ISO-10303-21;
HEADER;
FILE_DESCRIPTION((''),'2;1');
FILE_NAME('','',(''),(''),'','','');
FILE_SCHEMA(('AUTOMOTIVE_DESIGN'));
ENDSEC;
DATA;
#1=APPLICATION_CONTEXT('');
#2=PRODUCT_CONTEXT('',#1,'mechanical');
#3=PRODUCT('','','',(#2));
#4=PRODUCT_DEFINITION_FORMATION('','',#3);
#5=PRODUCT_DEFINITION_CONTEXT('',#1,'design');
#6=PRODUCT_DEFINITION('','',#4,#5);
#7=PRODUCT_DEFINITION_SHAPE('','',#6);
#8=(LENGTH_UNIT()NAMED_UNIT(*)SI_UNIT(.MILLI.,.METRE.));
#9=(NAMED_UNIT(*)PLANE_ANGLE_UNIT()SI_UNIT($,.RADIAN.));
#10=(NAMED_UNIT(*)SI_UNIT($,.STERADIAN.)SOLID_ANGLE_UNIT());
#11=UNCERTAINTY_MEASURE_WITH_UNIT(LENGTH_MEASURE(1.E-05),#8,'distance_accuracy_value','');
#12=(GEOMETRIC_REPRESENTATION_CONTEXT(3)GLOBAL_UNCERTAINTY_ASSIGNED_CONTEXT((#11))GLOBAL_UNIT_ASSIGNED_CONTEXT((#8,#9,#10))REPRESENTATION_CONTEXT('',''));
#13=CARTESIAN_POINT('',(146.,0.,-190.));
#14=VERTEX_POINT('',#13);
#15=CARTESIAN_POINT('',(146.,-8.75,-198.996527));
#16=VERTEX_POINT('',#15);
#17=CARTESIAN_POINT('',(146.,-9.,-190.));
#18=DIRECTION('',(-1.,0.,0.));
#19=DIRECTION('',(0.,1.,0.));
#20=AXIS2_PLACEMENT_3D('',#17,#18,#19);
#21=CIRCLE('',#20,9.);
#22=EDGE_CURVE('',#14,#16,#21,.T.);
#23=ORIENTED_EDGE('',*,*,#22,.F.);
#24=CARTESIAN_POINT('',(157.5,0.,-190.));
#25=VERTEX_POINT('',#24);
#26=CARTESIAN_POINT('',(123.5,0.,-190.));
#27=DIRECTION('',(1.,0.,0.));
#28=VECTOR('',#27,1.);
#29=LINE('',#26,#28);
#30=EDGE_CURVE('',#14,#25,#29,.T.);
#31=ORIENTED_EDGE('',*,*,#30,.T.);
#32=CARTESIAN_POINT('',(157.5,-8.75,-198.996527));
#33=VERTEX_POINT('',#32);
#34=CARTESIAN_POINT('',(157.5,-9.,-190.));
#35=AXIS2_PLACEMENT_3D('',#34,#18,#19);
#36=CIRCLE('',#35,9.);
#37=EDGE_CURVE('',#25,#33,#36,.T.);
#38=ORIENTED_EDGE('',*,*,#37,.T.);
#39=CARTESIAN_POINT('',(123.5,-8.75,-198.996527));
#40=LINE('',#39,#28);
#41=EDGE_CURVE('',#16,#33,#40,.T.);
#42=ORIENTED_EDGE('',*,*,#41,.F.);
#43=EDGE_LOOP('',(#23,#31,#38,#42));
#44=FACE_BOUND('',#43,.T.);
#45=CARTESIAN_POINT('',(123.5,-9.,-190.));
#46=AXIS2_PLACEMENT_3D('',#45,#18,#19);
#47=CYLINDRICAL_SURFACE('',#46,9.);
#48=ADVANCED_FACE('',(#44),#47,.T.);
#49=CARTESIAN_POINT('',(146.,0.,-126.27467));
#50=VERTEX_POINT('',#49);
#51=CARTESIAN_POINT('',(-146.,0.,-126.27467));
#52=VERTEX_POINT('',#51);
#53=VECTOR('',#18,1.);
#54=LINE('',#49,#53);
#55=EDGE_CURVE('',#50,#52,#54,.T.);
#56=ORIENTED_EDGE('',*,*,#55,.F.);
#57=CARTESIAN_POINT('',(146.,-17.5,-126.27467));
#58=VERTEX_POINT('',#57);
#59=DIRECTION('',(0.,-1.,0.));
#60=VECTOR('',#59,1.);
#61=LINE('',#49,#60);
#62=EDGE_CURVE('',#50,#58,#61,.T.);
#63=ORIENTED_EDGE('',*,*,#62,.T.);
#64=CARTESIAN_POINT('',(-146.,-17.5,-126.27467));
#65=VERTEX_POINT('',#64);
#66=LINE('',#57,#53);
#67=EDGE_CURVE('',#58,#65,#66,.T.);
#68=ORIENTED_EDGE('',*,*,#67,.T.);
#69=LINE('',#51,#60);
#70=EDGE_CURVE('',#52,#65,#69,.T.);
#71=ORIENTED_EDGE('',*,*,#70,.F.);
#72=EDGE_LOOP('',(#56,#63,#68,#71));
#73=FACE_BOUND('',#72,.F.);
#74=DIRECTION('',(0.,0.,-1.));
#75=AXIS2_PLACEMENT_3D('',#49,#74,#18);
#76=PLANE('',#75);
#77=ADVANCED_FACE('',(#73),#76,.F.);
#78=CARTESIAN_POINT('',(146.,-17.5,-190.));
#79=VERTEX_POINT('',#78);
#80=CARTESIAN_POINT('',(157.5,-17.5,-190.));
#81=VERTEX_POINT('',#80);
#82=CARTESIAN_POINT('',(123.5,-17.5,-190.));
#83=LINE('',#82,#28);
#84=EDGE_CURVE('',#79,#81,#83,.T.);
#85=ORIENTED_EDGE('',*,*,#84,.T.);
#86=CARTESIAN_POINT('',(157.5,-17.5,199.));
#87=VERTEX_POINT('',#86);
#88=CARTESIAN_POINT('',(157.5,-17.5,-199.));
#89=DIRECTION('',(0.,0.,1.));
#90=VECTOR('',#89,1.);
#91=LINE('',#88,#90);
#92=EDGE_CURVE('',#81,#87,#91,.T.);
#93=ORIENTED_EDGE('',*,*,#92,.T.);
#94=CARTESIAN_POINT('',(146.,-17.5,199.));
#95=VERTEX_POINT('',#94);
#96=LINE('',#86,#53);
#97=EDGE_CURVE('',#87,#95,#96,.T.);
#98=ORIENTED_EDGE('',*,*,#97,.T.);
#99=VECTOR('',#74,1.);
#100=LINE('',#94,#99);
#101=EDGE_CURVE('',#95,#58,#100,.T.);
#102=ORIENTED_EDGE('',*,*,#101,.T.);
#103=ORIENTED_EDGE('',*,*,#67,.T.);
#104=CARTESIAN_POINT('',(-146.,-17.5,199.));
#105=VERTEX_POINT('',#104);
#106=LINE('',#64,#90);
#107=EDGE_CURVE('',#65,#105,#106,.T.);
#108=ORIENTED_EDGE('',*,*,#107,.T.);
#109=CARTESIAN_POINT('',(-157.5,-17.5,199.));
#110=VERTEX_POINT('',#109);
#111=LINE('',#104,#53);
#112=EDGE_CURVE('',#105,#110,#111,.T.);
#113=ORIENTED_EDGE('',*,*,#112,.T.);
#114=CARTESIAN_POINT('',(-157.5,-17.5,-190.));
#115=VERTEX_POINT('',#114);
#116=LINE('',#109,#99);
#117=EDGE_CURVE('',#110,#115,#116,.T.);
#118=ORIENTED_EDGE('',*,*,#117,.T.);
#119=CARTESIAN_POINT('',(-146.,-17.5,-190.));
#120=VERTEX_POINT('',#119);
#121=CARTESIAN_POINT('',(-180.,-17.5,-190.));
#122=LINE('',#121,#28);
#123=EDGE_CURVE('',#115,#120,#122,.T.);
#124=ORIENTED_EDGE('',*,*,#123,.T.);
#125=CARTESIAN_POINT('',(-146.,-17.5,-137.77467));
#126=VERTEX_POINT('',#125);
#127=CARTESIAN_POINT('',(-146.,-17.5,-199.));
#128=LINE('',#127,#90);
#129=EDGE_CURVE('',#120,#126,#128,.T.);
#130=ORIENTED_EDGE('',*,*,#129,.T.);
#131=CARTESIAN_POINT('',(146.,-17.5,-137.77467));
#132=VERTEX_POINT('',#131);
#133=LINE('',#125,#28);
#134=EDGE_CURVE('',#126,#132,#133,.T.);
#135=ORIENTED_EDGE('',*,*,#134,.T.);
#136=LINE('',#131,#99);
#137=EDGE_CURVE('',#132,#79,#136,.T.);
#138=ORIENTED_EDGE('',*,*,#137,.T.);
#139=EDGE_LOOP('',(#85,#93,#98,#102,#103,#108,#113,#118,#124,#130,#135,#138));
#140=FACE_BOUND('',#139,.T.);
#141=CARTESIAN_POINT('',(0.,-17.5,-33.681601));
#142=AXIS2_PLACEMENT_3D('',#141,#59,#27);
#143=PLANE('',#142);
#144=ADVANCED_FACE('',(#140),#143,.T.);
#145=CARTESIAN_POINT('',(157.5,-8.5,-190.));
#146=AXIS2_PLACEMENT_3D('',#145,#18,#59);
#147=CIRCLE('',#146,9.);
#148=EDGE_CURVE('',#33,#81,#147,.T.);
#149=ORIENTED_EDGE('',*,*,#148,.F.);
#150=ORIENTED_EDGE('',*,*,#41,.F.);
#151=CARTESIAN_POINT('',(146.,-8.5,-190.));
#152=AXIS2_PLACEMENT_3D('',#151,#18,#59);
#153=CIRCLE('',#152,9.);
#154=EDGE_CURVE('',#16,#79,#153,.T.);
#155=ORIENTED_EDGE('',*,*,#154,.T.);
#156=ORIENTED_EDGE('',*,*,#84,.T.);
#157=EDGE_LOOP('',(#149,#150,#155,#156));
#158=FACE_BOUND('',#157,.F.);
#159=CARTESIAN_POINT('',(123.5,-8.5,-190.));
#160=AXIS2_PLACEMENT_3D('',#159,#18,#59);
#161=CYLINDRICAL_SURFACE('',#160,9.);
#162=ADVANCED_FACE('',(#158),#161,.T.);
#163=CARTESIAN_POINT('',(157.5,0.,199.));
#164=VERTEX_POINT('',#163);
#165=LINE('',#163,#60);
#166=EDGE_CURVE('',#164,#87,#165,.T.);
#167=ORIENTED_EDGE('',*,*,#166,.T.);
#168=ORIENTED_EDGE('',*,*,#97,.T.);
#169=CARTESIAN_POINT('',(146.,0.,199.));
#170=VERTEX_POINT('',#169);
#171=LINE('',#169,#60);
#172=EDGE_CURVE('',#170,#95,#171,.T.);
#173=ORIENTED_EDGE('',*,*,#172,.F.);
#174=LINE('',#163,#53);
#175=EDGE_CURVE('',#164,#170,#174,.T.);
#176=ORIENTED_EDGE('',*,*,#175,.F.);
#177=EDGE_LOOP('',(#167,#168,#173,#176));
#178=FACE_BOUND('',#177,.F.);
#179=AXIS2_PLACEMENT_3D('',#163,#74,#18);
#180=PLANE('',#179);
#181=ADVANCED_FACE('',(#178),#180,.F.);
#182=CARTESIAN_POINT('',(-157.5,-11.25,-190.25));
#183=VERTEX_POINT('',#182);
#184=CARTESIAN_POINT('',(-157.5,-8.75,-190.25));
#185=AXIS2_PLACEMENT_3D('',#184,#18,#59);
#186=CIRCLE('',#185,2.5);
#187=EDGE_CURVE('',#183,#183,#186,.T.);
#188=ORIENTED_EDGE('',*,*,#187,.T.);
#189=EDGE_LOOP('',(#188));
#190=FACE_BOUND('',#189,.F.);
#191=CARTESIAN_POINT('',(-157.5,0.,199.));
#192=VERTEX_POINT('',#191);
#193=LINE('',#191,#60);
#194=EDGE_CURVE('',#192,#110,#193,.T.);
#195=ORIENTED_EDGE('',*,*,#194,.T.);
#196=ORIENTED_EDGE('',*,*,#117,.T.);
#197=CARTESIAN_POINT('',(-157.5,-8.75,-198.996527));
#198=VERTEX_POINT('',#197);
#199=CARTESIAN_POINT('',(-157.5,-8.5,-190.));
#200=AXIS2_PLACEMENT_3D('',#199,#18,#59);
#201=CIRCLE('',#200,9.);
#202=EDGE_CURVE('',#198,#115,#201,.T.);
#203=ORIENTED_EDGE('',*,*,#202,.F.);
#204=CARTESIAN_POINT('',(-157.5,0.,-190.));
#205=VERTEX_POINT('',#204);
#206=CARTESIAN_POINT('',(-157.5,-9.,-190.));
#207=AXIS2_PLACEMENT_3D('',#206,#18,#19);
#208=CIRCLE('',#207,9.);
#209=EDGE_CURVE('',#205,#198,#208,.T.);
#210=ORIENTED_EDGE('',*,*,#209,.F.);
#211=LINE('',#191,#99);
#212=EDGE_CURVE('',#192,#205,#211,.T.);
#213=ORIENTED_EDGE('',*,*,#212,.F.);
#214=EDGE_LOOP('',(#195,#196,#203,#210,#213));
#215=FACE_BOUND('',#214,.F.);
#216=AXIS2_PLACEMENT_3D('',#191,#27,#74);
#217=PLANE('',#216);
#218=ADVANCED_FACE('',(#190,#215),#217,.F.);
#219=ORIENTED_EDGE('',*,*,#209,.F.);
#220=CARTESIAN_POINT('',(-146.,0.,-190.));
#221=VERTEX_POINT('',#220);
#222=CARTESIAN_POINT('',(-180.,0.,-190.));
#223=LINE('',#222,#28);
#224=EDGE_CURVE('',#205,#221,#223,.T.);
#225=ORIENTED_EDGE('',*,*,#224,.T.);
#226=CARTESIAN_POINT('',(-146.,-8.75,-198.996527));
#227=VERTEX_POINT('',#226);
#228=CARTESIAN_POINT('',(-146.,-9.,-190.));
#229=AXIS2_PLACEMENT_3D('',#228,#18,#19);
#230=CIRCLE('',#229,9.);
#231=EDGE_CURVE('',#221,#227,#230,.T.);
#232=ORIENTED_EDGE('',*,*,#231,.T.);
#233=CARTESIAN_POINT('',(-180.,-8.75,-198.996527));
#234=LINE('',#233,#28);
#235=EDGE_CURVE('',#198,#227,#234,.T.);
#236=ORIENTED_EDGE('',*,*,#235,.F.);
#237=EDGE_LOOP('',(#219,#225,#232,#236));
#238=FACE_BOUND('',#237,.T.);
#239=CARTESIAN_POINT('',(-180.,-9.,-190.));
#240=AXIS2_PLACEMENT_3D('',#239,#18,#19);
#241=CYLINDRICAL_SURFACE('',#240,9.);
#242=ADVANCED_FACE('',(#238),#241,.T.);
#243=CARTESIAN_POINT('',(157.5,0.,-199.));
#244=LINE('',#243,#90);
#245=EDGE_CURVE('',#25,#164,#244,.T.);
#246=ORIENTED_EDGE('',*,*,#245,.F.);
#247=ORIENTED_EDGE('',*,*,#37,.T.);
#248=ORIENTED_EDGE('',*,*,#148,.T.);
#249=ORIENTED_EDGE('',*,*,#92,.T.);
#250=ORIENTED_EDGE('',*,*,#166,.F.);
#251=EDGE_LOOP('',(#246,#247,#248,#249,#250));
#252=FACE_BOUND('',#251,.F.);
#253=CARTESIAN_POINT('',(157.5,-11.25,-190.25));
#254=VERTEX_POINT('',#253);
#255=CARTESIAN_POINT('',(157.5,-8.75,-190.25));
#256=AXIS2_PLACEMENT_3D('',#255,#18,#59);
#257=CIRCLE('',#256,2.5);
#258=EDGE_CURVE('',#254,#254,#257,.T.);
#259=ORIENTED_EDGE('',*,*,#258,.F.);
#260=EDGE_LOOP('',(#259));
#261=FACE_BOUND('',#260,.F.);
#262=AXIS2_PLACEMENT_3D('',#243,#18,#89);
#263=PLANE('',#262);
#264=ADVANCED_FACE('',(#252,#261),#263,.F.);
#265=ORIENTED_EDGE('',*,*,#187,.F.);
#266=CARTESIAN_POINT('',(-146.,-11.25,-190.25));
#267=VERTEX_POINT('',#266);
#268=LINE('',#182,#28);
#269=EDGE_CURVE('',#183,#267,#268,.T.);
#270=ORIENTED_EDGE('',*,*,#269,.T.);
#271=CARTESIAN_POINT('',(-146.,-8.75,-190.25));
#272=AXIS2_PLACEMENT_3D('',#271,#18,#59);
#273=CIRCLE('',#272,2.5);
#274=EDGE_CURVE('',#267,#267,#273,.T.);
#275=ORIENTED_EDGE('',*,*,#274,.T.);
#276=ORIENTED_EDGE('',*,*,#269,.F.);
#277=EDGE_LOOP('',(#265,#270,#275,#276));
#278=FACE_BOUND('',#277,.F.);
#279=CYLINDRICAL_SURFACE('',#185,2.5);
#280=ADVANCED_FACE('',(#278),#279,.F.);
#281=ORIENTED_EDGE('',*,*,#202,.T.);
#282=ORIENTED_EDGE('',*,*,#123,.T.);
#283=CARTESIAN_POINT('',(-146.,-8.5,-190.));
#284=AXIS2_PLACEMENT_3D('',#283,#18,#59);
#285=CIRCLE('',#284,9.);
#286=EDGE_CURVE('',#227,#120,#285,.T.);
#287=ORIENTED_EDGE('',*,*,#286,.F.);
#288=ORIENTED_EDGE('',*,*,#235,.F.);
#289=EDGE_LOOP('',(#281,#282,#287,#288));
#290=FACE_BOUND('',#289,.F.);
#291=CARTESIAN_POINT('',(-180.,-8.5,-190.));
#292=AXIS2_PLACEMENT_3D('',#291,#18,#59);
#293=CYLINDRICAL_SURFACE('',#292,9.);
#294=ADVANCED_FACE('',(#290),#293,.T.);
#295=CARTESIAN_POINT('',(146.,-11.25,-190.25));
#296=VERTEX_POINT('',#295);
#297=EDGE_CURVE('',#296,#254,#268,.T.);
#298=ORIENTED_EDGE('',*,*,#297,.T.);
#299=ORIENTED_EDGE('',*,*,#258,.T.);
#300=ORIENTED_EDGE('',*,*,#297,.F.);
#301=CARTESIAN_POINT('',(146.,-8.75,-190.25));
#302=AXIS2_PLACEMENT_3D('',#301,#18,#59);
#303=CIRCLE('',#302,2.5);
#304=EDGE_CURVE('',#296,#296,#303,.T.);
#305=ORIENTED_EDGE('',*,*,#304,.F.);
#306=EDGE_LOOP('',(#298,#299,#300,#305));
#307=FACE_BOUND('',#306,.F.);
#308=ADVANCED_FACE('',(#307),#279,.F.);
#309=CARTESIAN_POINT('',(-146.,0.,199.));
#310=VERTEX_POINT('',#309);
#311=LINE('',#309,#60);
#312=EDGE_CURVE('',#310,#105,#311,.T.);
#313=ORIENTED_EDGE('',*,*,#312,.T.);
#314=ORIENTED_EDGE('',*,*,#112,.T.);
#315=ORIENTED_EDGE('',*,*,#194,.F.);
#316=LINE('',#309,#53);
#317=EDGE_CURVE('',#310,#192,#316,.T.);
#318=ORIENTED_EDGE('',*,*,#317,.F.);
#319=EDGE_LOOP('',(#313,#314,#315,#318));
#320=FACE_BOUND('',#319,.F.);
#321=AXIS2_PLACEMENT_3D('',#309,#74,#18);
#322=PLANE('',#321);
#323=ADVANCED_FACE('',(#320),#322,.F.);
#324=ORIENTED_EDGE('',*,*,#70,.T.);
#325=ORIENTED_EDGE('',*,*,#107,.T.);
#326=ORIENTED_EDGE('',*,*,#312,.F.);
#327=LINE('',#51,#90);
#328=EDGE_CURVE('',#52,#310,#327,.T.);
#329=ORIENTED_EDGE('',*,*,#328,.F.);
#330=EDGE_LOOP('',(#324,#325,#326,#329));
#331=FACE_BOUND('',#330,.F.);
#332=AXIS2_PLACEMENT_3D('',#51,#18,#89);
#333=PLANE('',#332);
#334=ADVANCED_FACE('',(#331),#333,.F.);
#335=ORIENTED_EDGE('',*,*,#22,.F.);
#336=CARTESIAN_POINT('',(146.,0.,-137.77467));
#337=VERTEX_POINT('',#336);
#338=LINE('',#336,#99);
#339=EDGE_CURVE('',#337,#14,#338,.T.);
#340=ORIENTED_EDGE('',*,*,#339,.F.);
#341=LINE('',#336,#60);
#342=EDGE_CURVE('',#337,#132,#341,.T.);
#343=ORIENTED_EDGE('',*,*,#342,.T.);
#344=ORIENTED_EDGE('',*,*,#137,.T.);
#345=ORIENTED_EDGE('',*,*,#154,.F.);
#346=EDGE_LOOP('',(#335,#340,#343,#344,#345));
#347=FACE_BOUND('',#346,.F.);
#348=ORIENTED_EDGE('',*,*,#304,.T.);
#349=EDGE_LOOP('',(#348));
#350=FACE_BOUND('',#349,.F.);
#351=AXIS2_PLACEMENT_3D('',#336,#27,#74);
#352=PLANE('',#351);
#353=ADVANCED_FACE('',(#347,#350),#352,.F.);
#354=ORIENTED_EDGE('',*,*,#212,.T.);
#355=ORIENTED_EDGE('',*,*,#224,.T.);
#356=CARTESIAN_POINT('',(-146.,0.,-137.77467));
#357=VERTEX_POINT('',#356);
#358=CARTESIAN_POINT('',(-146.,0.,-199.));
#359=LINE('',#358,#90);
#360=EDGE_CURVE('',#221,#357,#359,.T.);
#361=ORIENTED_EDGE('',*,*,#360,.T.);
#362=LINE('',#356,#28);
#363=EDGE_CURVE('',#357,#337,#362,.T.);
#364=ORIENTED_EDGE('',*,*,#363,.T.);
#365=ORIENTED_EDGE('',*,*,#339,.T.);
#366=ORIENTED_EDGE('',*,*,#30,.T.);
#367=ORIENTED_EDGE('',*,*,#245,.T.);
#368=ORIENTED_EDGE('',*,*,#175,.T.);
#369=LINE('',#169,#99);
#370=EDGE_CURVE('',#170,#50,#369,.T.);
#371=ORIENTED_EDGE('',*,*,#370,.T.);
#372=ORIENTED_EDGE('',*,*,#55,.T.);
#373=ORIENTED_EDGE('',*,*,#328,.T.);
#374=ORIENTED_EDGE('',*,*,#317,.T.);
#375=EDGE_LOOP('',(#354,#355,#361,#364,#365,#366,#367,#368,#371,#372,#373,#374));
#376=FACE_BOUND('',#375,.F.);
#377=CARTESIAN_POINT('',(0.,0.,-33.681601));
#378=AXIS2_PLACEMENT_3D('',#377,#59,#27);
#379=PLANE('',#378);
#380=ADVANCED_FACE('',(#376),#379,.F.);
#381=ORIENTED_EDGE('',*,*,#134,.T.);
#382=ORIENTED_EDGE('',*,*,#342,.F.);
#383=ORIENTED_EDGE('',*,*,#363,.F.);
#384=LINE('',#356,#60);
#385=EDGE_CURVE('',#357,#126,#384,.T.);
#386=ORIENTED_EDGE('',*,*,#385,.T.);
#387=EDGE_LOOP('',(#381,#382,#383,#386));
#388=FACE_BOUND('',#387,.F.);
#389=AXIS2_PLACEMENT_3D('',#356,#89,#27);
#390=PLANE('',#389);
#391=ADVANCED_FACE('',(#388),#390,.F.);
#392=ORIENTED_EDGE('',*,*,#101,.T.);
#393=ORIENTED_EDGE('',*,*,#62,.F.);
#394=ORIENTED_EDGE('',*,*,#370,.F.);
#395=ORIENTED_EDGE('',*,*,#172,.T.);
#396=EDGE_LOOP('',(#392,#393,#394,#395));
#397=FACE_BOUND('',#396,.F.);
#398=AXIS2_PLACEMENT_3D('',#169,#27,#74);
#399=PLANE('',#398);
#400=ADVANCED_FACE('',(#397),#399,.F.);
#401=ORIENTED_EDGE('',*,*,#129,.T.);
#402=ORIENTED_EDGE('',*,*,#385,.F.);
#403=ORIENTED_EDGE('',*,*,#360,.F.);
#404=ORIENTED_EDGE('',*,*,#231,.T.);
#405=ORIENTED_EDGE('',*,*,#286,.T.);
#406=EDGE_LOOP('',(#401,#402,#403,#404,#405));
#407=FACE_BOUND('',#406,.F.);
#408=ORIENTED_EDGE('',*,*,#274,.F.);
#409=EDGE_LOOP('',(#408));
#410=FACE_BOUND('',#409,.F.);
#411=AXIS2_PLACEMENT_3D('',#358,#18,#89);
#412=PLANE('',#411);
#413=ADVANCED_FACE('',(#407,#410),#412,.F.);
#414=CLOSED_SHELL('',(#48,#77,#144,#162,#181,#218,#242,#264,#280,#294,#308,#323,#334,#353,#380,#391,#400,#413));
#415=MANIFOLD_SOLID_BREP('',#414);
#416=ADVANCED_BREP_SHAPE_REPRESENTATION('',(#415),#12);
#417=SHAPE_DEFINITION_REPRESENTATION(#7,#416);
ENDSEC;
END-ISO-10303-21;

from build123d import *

# Parameters (mm, degrees)
F1_DEPTH    = 17.5
F2_R        = 2.5
F3_DEPTH    = 335
F4_T1_DEPTH = 56.5
F4_T3_DEPTH = 56.5


# Not quite as in the source:
# - a fillet or chamfer that OpenCascade refuses, or shapes differently, is made with other operations: its cross-section is extruded or revolved along the edge and cut away or added


with BuildPart() as f1:
    # F0 (on Front) → F1 (new body)
    with BuildSketch(Plane.XZ):
        Polygon((-146, -137.7746703387), (0, -137.7746703387), (146, -137.7746703387), (146, -199), (157.5, -199), (157.5, 0), (157.5, 199), (146, 199), (146, 0), (146, -126.2746703387), (8.7075978518, -126.2746703387), (0, -126.2746703387), (-6.4604924992, -126.2746703387), (-146, -126.2746703387), (-146, 0), (-146, 199), (-157.5, 199), (-157.5, 0), (-157.5, -199), (-146, -199), align=None)
    extrude(amount=F1_DEPTH)

    # F2 (on face) → F3 (cut)
    with BuildSketch(Plane(origin=(-157.5, 0, 0), x_dir=(0, -1, 0), z_dir=(-1, 0, 0))):
        with Locations((8.75, -190.25)):
            Circle(F2_R)
    extrude(amount=-F3_DEPTH, mode=Mode.SUBTRACT)

    # F4: fillet of radius 9 on 4 edges, made by hand

    # F4_s2 → F4_t1 (cut)
    with BuildSketch(Plane.YZ.offset(-180)):
        with BuildLine():
            ThreePointArc((0, -190), (-2.6360389693, -196.3639610307), (-9, -199))
            Line((-9, -199), (0, -199))
            Line((0, -199), (0, -190))
        make_face()
        with BuildLine():
            ThreePointArc((-17.5, -190), (-14.8639610307, -196.3639610307), (-8.5, -199))
            Line((-8.5, -199), (-17.5, -199))
            Line((-17.5, -199), (-17.5, -190))
        make_face()
    extrude(amount=F4_T1_DEPTH, mode=Mode.SUBTRACT)

    # F4_s4 → F4_t3 (cut)
    with BuildSketch(Plane.YZ.offset(123.5)):
        with BuildLine():
            ThreePointArc((0, -190), (-2.6360389693, -196.3639610307), (-9, -199))
            Line((-9, -199), (0, -199))
            Line((0, -199), (0, -190))
        make_face()
        with BuildLine():
            ThreePointArc((-17.5, -190), (-14.8639610307, -196.3639610307), (-8.5, -199))
            Line((-8.5, -199), (-17.5, -199))
            Line((-17.5, -199), (-17.5, -190))
        make_face()
    extrude(amount=F4_T3_DEPTH, mode=Mode.SUBTRACT)


solid = f1.part
